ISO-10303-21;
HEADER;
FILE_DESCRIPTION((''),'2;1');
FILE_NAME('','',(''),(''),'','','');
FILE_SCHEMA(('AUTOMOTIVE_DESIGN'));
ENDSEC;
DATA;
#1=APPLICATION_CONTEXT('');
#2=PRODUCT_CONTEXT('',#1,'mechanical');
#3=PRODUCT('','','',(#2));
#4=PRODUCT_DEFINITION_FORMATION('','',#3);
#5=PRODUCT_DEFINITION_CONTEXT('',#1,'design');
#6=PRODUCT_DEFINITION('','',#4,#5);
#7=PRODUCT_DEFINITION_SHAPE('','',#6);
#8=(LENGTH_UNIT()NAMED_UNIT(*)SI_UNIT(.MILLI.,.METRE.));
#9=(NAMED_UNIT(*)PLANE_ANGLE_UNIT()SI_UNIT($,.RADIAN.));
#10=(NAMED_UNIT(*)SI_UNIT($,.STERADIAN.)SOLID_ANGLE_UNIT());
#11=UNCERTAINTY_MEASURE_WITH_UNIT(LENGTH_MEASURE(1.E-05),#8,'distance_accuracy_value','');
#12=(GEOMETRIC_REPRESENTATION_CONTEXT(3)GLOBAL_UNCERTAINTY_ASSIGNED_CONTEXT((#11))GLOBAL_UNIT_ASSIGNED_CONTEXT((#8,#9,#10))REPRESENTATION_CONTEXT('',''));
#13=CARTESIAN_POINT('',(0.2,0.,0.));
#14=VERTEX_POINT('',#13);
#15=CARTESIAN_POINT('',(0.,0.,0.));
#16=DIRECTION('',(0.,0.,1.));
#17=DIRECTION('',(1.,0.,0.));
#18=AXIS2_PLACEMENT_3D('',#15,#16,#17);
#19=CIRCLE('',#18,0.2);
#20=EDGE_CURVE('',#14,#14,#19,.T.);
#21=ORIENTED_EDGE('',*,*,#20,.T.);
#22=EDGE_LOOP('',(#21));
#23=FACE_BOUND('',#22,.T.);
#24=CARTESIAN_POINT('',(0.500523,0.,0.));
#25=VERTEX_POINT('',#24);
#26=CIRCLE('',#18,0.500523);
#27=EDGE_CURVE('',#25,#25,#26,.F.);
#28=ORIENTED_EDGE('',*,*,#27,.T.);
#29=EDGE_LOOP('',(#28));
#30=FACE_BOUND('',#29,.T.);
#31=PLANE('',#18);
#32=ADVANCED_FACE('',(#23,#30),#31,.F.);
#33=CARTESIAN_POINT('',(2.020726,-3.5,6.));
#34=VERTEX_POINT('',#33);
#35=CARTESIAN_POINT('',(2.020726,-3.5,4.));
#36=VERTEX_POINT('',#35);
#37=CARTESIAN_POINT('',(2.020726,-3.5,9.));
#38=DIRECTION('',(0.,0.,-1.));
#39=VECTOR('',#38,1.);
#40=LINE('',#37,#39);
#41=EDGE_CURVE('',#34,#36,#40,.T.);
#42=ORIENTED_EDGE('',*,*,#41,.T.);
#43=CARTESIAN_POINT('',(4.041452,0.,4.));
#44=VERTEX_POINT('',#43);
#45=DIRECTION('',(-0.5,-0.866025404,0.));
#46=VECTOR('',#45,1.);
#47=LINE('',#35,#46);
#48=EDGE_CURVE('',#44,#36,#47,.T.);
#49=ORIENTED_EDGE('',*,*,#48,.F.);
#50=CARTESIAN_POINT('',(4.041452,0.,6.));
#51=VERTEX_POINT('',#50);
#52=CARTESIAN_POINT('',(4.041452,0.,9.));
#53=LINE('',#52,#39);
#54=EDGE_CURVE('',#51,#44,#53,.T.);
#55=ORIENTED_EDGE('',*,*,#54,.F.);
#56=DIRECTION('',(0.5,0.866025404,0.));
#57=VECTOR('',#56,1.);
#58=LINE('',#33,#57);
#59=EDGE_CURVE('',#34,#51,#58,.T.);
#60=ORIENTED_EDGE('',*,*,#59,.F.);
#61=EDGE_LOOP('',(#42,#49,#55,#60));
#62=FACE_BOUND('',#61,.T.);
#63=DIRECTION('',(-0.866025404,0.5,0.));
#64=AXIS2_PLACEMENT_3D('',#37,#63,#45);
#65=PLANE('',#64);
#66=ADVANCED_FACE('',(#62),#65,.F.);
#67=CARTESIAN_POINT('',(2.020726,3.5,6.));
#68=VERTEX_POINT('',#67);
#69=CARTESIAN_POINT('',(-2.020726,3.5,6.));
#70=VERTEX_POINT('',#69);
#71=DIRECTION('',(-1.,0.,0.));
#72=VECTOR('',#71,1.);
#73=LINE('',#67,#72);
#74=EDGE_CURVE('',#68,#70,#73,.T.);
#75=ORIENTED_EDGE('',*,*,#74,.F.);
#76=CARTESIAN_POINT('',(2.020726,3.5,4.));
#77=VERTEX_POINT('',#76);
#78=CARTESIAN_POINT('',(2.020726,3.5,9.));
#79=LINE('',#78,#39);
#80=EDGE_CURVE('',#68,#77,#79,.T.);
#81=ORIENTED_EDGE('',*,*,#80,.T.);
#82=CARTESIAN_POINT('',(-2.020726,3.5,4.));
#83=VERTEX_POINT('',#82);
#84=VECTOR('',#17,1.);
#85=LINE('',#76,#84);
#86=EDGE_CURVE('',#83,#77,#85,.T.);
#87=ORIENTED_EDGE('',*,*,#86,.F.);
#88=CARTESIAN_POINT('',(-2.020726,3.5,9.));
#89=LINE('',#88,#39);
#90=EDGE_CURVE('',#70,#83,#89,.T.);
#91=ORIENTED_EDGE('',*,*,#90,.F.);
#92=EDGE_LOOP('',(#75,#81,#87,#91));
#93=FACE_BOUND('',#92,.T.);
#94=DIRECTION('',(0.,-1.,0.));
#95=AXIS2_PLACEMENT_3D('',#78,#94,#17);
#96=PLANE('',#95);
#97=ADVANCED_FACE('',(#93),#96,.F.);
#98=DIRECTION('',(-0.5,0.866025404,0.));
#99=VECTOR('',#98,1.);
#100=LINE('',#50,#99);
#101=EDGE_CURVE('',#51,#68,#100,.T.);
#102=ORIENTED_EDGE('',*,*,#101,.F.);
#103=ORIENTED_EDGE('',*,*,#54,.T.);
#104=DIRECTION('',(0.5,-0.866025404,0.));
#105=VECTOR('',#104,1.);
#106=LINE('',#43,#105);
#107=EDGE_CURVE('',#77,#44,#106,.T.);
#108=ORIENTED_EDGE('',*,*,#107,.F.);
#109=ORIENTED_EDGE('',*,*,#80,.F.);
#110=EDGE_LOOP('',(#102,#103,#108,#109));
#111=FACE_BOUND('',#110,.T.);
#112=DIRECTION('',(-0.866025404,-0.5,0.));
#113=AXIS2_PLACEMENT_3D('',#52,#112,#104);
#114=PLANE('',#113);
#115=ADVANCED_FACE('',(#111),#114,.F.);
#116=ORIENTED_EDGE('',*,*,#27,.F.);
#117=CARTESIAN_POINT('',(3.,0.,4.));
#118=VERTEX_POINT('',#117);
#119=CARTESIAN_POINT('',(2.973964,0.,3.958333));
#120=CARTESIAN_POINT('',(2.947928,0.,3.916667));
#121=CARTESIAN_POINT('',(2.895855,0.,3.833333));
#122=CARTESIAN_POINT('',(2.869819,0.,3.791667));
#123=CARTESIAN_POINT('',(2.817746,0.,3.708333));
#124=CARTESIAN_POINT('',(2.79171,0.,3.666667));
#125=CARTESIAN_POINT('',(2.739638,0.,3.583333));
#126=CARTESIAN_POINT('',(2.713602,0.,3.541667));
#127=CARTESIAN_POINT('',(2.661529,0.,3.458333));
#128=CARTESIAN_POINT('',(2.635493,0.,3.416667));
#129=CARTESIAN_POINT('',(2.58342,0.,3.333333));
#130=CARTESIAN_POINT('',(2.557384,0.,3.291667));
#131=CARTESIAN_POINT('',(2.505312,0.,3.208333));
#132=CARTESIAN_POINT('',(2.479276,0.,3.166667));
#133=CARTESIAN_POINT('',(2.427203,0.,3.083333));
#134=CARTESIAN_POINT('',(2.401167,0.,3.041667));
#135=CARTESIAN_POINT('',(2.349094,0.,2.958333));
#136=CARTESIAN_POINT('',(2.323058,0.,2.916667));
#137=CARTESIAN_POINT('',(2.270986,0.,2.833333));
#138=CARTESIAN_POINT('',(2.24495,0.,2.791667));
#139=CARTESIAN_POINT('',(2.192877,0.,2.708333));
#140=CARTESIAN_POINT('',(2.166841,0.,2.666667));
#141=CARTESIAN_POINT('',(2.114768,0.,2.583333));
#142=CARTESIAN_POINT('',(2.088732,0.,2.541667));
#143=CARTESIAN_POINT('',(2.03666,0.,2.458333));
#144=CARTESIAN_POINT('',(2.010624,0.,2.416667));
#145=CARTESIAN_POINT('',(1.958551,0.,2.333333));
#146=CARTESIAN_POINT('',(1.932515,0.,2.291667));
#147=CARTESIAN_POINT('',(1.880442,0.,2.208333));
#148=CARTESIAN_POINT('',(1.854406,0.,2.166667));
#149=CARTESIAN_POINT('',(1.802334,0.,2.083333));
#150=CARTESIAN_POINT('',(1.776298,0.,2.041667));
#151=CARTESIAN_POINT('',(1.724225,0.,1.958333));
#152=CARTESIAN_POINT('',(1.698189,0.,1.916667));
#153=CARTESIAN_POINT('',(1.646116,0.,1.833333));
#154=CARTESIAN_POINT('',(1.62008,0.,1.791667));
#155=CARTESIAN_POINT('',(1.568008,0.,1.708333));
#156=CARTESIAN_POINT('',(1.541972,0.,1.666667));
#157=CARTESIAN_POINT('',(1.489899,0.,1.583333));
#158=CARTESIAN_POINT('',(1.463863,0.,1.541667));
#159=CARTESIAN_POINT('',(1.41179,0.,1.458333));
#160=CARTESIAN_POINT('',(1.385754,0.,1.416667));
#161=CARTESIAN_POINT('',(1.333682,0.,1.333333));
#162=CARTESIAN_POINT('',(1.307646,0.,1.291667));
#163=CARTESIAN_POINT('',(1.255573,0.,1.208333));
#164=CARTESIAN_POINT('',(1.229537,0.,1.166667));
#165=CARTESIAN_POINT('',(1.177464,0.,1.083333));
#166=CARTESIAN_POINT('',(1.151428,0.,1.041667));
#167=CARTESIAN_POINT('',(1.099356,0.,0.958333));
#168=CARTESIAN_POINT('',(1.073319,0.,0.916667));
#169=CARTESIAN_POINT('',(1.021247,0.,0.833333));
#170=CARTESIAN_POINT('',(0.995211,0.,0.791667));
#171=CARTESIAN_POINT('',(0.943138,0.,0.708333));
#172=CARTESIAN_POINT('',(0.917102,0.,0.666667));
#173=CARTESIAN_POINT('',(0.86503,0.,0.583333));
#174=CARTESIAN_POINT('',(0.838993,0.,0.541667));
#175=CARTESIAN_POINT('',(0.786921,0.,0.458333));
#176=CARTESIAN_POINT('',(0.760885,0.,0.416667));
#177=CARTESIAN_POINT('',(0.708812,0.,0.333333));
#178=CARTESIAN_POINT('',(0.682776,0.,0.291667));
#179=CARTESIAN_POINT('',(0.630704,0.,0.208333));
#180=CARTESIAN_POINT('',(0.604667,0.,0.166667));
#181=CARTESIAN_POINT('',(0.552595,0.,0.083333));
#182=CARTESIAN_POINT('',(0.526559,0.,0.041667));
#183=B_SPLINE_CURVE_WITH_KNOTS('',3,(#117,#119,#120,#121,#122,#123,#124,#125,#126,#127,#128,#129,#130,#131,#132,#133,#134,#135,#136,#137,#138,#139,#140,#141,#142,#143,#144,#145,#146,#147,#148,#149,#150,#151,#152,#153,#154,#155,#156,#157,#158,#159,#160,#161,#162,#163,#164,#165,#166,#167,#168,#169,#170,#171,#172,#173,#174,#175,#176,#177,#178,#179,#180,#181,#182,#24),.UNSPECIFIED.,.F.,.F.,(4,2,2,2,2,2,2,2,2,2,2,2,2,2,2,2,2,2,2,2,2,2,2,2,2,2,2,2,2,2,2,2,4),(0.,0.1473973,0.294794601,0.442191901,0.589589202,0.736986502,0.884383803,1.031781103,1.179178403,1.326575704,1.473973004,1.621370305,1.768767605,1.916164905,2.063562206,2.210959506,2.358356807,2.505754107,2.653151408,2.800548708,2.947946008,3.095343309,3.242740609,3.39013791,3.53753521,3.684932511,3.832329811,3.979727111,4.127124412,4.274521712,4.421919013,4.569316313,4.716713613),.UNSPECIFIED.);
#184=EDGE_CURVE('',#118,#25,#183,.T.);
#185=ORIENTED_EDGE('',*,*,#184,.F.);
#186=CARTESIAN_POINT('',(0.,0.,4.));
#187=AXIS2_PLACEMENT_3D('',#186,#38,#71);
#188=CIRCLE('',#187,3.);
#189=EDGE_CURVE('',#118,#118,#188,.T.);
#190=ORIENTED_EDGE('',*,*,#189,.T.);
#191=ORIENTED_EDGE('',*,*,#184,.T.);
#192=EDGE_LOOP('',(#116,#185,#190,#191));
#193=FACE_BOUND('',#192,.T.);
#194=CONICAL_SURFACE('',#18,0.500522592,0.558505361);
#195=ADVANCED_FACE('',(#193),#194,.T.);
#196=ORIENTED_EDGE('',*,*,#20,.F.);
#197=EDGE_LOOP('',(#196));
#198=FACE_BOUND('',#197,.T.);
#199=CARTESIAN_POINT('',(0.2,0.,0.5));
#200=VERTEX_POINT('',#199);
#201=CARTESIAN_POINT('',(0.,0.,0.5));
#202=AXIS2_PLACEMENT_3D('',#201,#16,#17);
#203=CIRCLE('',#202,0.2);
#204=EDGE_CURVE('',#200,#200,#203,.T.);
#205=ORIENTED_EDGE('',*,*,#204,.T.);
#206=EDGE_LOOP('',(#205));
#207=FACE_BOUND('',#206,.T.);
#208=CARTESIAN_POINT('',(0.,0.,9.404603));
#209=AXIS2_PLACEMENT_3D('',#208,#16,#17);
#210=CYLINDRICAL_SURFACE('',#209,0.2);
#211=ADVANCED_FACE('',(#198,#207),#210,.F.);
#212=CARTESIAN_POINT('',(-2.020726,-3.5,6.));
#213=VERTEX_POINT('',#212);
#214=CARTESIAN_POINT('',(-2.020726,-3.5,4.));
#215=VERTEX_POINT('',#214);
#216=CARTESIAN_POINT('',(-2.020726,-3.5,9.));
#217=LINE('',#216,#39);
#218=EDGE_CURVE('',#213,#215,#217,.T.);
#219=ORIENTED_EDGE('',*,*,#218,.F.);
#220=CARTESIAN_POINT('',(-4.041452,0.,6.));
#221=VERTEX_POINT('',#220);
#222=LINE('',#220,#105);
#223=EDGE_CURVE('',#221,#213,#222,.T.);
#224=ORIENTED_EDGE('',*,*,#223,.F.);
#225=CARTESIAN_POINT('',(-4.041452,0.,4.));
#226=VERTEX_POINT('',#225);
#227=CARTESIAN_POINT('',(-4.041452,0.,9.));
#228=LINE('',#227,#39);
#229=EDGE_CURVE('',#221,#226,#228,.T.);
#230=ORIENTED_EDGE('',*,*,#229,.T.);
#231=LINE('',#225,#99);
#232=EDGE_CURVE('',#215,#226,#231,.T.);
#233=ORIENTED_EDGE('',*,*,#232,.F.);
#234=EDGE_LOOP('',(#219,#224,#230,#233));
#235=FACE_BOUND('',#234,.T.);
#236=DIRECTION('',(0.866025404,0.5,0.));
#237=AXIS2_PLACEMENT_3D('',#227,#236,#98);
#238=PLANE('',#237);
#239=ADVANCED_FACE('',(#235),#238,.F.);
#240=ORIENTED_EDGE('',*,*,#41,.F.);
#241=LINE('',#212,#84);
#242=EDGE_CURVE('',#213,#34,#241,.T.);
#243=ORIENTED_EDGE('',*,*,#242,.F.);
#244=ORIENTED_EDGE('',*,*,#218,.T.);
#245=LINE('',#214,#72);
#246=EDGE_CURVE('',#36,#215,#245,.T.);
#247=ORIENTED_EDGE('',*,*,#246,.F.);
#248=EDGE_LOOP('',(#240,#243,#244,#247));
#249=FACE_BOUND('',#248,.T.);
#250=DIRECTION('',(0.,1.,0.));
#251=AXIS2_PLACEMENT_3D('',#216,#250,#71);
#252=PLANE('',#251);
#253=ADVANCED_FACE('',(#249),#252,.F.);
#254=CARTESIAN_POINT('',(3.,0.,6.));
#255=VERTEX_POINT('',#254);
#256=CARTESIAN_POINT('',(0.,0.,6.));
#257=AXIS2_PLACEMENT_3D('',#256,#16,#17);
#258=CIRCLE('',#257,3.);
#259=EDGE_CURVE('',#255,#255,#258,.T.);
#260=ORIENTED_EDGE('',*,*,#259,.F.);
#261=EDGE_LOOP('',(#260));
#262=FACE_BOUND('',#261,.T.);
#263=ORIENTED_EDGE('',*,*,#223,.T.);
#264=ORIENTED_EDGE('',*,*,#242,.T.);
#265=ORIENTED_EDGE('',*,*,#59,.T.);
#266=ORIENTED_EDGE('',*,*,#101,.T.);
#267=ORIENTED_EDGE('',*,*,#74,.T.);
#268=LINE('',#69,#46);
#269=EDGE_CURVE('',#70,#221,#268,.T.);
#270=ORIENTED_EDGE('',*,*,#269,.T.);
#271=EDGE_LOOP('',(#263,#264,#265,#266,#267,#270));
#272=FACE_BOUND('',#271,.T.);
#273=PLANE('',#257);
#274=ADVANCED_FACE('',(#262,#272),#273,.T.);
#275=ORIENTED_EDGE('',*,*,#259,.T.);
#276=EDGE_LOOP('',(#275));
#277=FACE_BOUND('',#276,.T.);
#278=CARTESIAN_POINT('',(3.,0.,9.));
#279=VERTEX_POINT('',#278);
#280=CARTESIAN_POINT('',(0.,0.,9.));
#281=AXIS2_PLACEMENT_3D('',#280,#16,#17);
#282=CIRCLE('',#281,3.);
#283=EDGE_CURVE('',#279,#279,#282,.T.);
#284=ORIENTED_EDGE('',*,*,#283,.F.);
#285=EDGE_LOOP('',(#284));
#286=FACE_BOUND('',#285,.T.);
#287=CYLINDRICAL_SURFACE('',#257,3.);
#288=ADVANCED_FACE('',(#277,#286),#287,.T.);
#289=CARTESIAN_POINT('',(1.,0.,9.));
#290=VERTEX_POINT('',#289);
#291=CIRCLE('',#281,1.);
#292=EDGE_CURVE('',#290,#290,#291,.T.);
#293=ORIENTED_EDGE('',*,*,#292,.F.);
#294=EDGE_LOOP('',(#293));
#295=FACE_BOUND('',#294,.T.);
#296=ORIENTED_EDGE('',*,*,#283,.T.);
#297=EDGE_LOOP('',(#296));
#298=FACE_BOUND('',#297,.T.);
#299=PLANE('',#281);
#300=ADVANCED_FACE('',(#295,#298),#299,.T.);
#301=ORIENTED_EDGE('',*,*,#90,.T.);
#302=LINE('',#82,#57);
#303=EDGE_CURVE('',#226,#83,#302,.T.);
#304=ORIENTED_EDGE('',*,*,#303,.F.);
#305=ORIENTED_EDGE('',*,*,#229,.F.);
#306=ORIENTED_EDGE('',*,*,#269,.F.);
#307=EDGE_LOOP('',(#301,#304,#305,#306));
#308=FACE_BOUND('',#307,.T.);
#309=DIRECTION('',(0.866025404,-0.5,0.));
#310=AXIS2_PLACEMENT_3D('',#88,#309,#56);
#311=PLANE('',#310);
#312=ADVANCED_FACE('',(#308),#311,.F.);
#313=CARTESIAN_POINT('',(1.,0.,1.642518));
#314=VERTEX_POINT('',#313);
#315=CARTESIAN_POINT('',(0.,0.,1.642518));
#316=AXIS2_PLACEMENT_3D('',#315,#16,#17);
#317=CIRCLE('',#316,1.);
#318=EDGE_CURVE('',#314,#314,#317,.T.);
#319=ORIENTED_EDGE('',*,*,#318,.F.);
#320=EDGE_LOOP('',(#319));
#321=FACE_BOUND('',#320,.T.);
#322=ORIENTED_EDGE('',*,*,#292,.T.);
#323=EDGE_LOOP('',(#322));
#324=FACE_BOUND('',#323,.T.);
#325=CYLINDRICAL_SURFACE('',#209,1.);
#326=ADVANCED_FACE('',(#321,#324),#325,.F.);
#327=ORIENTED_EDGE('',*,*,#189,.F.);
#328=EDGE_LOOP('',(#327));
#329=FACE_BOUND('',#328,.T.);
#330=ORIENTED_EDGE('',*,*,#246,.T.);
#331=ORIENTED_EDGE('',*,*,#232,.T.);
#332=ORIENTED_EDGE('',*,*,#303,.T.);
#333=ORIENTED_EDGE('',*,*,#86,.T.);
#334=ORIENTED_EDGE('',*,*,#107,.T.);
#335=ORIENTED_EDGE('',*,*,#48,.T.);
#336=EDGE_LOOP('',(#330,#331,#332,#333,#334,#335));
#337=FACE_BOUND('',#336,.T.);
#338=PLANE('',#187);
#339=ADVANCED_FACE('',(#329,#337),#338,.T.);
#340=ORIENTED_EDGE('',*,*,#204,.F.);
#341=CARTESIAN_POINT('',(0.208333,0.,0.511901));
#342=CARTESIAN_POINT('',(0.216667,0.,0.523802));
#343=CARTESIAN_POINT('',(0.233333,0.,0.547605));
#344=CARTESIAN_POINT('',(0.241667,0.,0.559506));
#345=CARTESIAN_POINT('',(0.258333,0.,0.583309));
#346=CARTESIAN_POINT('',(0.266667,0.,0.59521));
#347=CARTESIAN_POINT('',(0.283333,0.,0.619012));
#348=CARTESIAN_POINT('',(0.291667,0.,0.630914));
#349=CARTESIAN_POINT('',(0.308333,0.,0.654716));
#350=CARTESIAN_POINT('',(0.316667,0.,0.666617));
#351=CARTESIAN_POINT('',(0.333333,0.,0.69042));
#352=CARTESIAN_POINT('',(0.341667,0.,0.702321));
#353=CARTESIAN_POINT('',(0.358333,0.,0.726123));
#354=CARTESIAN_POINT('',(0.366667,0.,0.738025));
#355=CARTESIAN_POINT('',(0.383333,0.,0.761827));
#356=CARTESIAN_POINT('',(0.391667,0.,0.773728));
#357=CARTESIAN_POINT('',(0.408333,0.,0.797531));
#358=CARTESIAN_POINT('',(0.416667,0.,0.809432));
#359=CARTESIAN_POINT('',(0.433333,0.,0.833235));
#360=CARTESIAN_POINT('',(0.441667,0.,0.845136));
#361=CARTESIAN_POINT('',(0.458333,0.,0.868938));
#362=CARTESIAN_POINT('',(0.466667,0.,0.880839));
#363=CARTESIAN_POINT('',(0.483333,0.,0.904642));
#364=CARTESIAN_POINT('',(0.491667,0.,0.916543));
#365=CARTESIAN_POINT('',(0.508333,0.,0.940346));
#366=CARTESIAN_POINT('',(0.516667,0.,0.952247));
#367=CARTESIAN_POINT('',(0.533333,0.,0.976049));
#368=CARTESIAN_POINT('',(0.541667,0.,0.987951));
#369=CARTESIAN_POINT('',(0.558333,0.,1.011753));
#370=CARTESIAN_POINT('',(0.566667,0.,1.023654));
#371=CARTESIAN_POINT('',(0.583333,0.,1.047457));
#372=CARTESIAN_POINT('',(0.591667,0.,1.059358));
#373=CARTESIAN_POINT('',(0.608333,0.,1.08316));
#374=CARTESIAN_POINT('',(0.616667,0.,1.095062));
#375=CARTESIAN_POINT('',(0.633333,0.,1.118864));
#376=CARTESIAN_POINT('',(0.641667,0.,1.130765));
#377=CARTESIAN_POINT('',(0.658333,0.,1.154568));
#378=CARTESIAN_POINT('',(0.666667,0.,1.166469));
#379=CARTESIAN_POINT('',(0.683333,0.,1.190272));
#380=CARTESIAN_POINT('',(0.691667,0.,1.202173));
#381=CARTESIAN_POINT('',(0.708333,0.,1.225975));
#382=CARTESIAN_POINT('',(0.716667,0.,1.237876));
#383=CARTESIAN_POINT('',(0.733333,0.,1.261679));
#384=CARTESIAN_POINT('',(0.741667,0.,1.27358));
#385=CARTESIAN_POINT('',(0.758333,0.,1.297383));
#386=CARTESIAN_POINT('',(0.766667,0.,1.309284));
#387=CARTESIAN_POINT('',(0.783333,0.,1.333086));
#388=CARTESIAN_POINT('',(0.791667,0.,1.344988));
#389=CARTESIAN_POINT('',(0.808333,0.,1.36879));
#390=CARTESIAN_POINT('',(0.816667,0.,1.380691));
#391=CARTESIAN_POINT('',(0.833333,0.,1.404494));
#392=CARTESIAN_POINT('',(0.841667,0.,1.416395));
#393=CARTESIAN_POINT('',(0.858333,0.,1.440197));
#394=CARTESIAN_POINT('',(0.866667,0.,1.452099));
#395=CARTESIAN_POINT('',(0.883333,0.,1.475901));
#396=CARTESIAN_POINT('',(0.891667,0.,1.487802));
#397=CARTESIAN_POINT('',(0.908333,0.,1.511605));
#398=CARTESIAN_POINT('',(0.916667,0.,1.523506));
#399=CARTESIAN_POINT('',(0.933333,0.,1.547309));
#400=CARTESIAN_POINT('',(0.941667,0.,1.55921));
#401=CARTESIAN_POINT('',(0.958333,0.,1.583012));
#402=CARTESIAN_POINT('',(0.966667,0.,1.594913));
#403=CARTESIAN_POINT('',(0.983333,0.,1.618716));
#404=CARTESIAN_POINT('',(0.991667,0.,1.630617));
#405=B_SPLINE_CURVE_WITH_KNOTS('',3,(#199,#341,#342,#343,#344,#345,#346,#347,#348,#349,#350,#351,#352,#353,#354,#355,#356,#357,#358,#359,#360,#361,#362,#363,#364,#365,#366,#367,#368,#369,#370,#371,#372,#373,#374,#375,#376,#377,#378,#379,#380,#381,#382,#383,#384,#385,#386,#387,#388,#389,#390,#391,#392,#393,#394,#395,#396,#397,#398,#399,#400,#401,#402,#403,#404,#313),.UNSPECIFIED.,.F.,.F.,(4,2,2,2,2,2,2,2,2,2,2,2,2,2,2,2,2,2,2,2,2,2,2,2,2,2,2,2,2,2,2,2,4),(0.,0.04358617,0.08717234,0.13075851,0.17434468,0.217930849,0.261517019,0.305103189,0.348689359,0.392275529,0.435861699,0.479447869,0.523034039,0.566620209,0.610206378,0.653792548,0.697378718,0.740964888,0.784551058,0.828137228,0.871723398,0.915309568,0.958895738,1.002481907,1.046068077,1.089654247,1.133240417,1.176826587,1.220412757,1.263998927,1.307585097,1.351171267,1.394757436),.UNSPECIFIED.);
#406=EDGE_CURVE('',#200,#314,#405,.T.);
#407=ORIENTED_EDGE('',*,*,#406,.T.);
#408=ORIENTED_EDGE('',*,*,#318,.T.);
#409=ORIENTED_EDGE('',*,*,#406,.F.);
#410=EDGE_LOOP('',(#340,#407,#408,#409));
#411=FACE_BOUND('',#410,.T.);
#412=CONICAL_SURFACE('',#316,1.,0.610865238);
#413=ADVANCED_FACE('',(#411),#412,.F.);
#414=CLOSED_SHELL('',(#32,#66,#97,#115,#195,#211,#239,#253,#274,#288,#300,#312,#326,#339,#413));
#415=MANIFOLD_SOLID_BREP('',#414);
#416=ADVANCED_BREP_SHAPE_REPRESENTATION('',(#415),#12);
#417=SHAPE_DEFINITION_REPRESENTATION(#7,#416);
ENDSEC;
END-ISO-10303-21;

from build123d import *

# Parameters (mm, degrees)
BOSS_EXTRU_1_DEPTH      = 9
ESQUISSE2_W             = 19.623971562
ESQUISSE2_H             = 15.534154535
ESQUISSE2_R             = 3
ENL_V_MAT_EXTRU_1_DEPTH = 3
ENL_V_START             = -4
ESQUISSE3_W             = 11.267201257
ESQUISSE3_H             = 13.961169169
ESQUISSE3_R             = 3
ENL_V_MAT_EXTRU_2_DEPTH = 4
CHANFREIN1_SIZE         = 4
CHANFREIN1_SIZE_2       = 2.499477408


with BuildPart() as part:
    # Esquisse1 → Boss.-Extru.1 (new body)
    with BuildSketch(Plane.XY):
        Polygon((4.041451884, 0), (2.020725942, 3.5), (-2.020725942, 3.5), (-4.041451884, 0), (-2.020725942, -3.5), (2.020725942, -3.5), align=None)
    extrude(amount=BOSS_EXTRU_1_DEPTH)

    # Esquisse2 → Enlèv. mat.-Extru.1 (cut)
    with BuildSketch(Plane.XY.offset(9)):
        with Locations((0.327116653, -1.544441398)):
            Rectangle(ESQUISSE2_W, ESQUISSE2_H)
        Circle(ESQUISSE2_R, mode=Mode.SUBTRACT)
    extrude(amount=-ENL_V_MAT_EXTRU_1_DEPTH, mode=Mode.SUBTRACT)

    # Esquisse3 → Enlèv. mat.-Extru.2 (cut)
    with BuildSketch(Plane(origin=(0, 0, 0), x_dir=(-1, 0, 0), z_dir=(0, 0, -1)).offset(ENL_V_START)):
        with Locations((0.009770186, 0.039262349)):
            Rectangle(ESQUISSE3_W, ESQUISSE3_H)
        with Locations(Location((0, 0, 0), (0, 0, 180))):
            Circle(ESQUISSE3_R, mode=Mode.SUBTRACT)
    extrude(amount=ENL_V_MAT_EXTRU_2_DEPTH, mode=Mode.SUBTRACT)

    # Chanfrein1
    # the kernel refuses this chamfer: 4, 2.499477408 mm, written as the material it takes off along each edge
    with BuildSketch(Plane(origin=(0, 0, 0), x_dir=(1, 0, 0), z_dir=(0, 1, 0))) as chanfrein1_piece_1_section:
        Polygon((3, -CHANFREIN1_SIZE), (3 - CHANFREIN1_SIZE_2, 0), (3, 0), align=None)
    chanfrein1_piece_1 = revolve(axis=Axis((0, 0, 0), (0, 0, -1)), mode=Mode.PRIVATE)
    chanfrein1_piece_1 = split(chanfrein1_piece_1, bisect_by=Plane(origin=(-1.744026904, 0, 4), z_dir=(0, 0, -1)), keep=Keep.TOP, mode=Mode.PRIVATE)
    add(chanfrein1_piece_1, mode=Mode.SUBTRACT)

    # Esquisse4 → Enlèvement de matière-Révolution1 (revolve, cut)
    with BuildSketch(Plane(origin=(0, 0, 0), x_dir=(1, 0, 0), z_dir=(0, 1, 0))):
        Polygon((0, -9), (1, -9), (1, -1.642518405), (0.2, -0.5), (0.2, 0), (0, 0), align=None)
    revolve(axis=Axis((0, 0, 9.404603351), (0, 0, -1)), mode=Mode.SUBTRACT)


solid = part.part
